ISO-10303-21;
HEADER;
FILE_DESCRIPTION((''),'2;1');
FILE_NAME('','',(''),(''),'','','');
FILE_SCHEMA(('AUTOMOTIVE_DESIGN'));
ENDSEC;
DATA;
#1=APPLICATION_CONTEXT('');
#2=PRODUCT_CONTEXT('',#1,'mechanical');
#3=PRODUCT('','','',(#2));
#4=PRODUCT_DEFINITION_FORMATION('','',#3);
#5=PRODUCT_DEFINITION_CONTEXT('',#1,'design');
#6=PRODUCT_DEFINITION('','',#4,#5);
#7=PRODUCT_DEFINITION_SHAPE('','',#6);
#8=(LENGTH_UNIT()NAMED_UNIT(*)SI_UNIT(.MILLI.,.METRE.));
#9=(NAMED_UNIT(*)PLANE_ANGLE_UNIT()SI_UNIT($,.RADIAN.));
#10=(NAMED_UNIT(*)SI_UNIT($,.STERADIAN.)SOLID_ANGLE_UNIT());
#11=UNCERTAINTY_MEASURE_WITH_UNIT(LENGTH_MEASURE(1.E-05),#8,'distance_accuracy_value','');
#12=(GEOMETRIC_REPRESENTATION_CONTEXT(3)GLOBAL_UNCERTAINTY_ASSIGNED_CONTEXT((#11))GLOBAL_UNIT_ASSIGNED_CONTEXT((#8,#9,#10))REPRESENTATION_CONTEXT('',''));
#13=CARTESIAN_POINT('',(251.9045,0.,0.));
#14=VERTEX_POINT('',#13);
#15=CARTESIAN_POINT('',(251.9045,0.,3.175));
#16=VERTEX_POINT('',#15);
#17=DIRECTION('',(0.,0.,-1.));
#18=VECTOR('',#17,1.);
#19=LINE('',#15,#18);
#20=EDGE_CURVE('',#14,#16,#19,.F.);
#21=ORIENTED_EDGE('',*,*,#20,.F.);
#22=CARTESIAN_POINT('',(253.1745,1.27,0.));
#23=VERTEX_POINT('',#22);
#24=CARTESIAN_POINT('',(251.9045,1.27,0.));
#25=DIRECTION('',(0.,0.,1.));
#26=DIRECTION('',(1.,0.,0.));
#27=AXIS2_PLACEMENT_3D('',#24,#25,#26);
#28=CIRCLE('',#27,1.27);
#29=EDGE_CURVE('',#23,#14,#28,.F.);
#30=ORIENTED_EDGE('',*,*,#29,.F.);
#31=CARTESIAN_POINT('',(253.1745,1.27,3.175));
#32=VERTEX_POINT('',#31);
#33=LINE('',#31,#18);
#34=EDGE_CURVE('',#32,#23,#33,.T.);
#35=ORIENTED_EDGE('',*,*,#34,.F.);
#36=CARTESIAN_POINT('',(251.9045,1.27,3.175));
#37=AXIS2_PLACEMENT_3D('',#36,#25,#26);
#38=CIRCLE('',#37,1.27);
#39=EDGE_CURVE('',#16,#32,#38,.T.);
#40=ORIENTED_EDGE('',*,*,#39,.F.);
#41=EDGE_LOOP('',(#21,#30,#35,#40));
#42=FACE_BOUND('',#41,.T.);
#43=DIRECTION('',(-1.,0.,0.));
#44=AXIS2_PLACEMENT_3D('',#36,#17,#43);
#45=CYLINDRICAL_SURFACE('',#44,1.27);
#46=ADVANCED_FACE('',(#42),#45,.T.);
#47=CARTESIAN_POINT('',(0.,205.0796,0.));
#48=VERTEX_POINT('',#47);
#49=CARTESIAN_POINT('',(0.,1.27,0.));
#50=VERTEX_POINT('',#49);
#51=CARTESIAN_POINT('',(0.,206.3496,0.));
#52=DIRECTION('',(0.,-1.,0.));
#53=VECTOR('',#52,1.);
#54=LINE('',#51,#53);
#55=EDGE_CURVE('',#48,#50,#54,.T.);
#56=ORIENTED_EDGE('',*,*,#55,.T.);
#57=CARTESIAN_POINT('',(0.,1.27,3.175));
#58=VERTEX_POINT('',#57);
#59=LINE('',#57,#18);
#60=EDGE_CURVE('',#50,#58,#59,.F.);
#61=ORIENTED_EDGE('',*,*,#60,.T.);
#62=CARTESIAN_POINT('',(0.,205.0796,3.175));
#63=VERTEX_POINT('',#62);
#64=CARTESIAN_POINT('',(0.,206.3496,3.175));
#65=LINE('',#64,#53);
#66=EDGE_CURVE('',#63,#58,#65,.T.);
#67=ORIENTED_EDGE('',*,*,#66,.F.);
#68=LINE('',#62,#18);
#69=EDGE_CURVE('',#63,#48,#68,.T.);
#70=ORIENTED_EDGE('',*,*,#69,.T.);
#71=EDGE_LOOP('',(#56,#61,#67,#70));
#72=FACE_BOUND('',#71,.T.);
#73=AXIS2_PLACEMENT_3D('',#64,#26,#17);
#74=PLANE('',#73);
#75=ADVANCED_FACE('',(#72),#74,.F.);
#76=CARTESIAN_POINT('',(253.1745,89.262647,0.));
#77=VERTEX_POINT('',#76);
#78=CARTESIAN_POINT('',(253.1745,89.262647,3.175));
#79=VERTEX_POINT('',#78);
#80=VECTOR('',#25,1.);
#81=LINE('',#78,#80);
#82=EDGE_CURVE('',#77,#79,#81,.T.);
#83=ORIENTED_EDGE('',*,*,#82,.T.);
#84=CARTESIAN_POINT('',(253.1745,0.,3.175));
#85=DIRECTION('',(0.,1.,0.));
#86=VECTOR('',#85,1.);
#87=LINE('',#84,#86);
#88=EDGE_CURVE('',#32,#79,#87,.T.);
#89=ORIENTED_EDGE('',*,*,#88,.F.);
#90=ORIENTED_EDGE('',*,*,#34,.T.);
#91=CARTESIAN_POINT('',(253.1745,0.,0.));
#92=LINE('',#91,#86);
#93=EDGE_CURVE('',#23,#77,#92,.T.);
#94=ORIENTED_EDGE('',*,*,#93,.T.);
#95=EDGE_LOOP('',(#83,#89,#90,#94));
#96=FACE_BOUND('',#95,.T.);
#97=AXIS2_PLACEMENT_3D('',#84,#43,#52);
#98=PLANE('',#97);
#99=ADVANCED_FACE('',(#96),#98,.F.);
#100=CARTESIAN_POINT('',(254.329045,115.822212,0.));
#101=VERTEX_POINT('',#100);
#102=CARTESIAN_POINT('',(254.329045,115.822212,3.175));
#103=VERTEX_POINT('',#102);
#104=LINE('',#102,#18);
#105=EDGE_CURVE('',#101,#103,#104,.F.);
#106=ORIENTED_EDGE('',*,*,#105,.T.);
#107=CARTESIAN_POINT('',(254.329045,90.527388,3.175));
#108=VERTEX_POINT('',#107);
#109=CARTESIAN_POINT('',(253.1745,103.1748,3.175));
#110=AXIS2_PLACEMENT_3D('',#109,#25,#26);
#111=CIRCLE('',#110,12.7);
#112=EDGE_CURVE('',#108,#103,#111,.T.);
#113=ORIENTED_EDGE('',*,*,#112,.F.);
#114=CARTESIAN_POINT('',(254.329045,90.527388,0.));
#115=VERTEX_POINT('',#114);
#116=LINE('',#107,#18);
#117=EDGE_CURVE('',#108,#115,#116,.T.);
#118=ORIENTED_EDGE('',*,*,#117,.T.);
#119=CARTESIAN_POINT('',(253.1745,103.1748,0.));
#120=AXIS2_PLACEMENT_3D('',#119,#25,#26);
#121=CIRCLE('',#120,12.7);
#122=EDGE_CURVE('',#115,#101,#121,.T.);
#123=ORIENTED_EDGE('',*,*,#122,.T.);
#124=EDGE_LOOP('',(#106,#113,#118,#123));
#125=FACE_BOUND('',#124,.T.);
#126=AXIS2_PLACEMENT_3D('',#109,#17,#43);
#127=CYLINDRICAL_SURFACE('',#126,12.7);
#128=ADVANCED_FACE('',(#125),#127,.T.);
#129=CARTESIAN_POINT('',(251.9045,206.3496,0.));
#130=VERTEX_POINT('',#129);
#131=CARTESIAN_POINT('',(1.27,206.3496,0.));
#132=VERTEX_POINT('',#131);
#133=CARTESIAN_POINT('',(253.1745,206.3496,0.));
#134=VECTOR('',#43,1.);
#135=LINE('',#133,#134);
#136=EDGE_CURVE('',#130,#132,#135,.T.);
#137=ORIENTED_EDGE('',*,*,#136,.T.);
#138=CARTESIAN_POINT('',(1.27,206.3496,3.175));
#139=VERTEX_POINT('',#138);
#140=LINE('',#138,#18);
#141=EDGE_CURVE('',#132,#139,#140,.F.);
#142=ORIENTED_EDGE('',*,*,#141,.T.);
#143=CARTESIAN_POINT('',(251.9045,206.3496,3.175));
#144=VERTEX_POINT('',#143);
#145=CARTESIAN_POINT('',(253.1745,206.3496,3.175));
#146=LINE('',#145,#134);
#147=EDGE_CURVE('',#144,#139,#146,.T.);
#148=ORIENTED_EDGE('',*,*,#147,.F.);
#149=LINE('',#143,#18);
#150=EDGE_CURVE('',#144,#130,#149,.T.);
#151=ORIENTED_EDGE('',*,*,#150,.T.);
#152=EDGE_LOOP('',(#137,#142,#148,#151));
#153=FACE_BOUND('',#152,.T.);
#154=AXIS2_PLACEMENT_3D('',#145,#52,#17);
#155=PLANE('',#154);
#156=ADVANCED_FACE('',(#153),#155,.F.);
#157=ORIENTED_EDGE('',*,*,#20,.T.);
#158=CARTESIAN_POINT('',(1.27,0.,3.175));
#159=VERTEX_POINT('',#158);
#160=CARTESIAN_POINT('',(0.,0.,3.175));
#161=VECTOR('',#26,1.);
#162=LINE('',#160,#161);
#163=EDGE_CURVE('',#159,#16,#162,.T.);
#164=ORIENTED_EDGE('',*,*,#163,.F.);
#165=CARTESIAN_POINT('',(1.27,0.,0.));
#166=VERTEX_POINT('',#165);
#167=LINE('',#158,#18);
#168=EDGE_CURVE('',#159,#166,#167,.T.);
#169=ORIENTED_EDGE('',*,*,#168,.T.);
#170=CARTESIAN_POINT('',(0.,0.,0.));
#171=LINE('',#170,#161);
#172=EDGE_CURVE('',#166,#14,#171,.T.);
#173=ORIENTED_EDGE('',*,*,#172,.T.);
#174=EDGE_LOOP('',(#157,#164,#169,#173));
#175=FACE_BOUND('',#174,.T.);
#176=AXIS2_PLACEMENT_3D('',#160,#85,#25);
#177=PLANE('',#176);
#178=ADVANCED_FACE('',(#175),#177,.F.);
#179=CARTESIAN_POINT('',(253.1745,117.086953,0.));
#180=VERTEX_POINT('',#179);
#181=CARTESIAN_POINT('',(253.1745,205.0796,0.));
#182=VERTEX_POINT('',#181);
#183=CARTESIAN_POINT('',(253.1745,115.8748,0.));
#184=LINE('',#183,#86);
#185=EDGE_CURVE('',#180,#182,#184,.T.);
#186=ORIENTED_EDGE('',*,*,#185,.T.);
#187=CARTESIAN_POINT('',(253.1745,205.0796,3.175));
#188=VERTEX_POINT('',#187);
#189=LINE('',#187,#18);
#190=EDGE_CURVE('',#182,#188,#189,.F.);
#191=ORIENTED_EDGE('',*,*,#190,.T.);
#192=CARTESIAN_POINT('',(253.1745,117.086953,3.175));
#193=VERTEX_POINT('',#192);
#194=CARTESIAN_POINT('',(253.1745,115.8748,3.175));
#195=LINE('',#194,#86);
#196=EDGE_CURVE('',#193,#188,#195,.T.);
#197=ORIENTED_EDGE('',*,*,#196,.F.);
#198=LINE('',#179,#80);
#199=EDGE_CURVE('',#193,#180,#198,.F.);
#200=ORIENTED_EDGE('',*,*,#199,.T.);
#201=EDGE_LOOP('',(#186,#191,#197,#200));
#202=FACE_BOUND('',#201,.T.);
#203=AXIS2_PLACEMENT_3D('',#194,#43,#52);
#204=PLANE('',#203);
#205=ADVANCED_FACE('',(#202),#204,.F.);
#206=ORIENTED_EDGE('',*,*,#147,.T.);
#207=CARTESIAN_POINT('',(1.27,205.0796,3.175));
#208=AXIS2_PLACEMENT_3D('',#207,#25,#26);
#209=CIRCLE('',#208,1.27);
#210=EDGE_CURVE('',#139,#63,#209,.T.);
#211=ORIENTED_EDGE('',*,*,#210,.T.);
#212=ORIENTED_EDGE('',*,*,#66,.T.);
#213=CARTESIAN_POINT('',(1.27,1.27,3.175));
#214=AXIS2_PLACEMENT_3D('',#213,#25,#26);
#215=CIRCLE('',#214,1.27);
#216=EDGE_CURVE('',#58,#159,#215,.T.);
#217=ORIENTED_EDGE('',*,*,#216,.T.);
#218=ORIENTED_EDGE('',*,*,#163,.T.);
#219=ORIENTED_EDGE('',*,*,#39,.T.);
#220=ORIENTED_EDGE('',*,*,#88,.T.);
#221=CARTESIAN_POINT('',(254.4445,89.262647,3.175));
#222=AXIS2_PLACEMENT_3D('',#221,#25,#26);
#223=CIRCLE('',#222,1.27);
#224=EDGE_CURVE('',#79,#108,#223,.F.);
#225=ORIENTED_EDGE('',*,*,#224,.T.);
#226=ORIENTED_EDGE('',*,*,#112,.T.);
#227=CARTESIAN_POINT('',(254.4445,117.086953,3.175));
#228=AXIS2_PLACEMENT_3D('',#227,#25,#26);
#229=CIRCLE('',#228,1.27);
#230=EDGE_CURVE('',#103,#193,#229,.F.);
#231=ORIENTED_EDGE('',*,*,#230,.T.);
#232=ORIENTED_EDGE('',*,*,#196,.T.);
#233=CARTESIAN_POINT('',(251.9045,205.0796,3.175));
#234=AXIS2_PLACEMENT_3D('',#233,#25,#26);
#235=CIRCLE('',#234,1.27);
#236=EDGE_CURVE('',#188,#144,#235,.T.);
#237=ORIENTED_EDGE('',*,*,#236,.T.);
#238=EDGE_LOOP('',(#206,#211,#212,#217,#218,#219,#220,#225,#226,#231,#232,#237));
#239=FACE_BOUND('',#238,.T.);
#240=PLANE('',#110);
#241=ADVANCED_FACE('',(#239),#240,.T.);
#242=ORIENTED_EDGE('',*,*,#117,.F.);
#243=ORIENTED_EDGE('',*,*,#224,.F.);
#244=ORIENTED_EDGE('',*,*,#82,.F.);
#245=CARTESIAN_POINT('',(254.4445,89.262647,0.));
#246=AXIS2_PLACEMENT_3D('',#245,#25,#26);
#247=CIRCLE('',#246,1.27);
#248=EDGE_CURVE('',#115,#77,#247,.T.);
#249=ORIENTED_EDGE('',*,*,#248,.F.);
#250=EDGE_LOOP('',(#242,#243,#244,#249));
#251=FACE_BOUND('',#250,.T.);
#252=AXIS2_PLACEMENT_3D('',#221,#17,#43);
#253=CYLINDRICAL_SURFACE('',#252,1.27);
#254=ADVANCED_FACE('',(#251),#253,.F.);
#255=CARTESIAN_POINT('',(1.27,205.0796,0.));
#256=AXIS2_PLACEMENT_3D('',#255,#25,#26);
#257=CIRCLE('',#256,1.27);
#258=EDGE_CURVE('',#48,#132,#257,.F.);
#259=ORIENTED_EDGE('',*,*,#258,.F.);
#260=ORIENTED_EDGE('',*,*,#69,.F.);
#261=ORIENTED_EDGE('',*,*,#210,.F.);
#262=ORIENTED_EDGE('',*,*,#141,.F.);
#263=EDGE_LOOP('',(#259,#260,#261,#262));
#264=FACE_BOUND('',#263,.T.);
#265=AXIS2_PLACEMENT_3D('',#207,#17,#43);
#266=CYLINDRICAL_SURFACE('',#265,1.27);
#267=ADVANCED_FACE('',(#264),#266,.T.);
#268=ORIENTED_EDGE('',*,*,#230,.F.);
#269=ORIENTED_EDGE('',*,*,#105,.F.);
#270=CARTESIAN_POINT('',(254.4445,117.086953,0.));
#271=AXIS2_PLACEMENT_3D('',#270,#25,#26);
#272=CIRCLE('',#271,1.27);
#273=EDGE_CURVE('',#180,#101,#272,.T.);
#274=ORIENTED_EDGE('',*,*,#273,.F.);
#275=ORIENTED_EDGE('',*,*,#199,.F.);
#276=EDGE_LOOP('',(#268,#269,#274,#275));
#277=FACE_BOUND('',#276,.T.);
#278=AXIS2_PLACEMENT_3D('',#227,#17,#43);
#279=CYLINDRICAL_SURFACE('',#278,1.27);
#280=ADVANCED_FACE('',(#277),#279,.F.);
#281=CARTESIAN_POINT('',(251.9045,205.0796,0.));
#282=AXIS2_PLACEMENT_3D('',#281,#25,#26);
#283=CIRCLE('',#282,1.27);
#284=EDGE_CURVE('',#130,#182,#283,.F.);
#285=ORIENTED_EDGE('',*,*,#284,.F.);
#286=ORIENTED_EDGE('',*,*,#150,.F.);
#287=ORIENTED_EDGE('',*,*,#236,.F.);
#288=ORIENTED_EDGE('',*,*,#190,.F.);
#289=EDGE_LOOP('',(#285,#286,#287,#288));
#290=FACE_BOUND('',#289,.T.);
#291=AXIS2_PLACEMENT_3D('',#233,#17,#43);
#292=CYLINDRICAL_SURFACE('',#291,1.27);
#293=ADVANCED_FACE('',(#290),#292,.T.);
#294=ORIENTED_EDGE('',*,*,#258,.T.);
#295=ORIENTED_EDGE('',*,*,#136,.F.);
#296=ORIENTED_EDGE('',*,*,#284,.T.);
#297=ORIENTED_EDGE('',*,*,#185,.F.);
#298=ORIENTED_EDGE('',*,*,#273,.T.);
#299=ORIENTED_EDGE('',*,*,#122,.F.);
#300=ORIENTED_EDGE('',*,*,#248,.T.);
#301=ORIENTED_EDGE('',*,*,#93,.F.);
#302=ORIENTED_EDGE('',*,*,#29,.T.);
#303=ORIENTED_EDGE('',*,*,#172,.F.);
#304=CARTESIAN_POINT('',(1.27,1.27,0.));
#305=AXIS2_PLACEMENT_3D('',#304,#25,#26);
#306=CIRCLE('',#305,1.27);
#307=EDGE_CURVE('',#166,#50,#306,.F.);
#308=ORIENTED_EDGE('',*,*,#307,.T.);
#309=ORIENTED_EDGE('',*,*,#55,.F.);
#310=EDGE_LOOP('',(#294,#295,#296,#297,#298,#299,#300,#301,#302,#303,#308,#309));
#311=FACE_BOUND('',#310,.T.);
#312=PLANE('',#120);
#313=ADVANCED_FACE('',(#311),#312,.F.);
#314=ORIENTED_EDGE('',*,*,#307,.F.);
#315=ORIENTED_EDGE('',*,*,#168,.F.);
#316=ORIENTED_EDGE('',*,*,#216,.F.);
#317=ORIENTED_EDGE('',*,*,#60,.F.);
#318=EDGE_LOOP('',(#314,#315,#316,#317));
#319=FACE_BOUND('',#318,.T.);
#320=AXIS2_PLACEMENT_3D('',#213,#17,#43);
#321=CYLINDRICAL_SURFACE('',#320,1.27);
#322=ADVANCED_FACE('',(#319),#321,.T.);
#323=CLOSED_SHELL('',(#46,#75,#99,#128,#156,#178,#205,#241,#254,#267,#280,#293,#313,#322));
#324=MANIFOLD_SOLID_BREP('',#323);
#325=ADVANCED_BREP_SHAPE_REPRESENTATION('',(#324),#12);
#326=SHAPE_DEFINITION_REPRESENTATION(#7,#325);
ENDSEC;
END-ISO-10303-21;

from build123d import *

# Parameters (mm, degrees)
BOSS_EXTRUDE2_DEPTH = 3.175
FILLET1_R           = 1.27


# Read off the part's stored shape, not the designer's step: Boss-Extrude2
with BuildPart() as part:
    # Boss-Extrude2 outline → Boss-Extrude2 (new body)
    with BuildSketch(Plane.XY):
        with BuildLine():
            ThreePointArc((253.1745, 90.4748), (265.8745, 103.1748), (253.1745, 115.8748))
            Line((253.1745, 115.8748), (253.1745, 206.3496))
            Line((253.1745, 206.3496), (0, 206.3496))
            Line((0, 206.3496), (0, 0))
            Line((0, 0), (253.1745, 0))
            Line((253.1745, 0), (253.1745, 90.4748))
        make_face()
    extrude(amount=BOSS_EXTRUDE2_DEPTH)

    # Fillet1
    fillet1_edges = [part.edges().sort_by_distance(p)[0] for p in [
        (253.1745, 90.4748, 1.5875),
        (253.1745, 0, 1.5875),
        (0, 0, 1.5875),
        (0, 206.3496, 1.5875),
        (253.1745, 206.3496, 1.5875),
        (253.1745, 115.8748, 1.5875),
    ]]
    fillet(fillet1_edges, radius=FILLET1_R)


solid = part.part
